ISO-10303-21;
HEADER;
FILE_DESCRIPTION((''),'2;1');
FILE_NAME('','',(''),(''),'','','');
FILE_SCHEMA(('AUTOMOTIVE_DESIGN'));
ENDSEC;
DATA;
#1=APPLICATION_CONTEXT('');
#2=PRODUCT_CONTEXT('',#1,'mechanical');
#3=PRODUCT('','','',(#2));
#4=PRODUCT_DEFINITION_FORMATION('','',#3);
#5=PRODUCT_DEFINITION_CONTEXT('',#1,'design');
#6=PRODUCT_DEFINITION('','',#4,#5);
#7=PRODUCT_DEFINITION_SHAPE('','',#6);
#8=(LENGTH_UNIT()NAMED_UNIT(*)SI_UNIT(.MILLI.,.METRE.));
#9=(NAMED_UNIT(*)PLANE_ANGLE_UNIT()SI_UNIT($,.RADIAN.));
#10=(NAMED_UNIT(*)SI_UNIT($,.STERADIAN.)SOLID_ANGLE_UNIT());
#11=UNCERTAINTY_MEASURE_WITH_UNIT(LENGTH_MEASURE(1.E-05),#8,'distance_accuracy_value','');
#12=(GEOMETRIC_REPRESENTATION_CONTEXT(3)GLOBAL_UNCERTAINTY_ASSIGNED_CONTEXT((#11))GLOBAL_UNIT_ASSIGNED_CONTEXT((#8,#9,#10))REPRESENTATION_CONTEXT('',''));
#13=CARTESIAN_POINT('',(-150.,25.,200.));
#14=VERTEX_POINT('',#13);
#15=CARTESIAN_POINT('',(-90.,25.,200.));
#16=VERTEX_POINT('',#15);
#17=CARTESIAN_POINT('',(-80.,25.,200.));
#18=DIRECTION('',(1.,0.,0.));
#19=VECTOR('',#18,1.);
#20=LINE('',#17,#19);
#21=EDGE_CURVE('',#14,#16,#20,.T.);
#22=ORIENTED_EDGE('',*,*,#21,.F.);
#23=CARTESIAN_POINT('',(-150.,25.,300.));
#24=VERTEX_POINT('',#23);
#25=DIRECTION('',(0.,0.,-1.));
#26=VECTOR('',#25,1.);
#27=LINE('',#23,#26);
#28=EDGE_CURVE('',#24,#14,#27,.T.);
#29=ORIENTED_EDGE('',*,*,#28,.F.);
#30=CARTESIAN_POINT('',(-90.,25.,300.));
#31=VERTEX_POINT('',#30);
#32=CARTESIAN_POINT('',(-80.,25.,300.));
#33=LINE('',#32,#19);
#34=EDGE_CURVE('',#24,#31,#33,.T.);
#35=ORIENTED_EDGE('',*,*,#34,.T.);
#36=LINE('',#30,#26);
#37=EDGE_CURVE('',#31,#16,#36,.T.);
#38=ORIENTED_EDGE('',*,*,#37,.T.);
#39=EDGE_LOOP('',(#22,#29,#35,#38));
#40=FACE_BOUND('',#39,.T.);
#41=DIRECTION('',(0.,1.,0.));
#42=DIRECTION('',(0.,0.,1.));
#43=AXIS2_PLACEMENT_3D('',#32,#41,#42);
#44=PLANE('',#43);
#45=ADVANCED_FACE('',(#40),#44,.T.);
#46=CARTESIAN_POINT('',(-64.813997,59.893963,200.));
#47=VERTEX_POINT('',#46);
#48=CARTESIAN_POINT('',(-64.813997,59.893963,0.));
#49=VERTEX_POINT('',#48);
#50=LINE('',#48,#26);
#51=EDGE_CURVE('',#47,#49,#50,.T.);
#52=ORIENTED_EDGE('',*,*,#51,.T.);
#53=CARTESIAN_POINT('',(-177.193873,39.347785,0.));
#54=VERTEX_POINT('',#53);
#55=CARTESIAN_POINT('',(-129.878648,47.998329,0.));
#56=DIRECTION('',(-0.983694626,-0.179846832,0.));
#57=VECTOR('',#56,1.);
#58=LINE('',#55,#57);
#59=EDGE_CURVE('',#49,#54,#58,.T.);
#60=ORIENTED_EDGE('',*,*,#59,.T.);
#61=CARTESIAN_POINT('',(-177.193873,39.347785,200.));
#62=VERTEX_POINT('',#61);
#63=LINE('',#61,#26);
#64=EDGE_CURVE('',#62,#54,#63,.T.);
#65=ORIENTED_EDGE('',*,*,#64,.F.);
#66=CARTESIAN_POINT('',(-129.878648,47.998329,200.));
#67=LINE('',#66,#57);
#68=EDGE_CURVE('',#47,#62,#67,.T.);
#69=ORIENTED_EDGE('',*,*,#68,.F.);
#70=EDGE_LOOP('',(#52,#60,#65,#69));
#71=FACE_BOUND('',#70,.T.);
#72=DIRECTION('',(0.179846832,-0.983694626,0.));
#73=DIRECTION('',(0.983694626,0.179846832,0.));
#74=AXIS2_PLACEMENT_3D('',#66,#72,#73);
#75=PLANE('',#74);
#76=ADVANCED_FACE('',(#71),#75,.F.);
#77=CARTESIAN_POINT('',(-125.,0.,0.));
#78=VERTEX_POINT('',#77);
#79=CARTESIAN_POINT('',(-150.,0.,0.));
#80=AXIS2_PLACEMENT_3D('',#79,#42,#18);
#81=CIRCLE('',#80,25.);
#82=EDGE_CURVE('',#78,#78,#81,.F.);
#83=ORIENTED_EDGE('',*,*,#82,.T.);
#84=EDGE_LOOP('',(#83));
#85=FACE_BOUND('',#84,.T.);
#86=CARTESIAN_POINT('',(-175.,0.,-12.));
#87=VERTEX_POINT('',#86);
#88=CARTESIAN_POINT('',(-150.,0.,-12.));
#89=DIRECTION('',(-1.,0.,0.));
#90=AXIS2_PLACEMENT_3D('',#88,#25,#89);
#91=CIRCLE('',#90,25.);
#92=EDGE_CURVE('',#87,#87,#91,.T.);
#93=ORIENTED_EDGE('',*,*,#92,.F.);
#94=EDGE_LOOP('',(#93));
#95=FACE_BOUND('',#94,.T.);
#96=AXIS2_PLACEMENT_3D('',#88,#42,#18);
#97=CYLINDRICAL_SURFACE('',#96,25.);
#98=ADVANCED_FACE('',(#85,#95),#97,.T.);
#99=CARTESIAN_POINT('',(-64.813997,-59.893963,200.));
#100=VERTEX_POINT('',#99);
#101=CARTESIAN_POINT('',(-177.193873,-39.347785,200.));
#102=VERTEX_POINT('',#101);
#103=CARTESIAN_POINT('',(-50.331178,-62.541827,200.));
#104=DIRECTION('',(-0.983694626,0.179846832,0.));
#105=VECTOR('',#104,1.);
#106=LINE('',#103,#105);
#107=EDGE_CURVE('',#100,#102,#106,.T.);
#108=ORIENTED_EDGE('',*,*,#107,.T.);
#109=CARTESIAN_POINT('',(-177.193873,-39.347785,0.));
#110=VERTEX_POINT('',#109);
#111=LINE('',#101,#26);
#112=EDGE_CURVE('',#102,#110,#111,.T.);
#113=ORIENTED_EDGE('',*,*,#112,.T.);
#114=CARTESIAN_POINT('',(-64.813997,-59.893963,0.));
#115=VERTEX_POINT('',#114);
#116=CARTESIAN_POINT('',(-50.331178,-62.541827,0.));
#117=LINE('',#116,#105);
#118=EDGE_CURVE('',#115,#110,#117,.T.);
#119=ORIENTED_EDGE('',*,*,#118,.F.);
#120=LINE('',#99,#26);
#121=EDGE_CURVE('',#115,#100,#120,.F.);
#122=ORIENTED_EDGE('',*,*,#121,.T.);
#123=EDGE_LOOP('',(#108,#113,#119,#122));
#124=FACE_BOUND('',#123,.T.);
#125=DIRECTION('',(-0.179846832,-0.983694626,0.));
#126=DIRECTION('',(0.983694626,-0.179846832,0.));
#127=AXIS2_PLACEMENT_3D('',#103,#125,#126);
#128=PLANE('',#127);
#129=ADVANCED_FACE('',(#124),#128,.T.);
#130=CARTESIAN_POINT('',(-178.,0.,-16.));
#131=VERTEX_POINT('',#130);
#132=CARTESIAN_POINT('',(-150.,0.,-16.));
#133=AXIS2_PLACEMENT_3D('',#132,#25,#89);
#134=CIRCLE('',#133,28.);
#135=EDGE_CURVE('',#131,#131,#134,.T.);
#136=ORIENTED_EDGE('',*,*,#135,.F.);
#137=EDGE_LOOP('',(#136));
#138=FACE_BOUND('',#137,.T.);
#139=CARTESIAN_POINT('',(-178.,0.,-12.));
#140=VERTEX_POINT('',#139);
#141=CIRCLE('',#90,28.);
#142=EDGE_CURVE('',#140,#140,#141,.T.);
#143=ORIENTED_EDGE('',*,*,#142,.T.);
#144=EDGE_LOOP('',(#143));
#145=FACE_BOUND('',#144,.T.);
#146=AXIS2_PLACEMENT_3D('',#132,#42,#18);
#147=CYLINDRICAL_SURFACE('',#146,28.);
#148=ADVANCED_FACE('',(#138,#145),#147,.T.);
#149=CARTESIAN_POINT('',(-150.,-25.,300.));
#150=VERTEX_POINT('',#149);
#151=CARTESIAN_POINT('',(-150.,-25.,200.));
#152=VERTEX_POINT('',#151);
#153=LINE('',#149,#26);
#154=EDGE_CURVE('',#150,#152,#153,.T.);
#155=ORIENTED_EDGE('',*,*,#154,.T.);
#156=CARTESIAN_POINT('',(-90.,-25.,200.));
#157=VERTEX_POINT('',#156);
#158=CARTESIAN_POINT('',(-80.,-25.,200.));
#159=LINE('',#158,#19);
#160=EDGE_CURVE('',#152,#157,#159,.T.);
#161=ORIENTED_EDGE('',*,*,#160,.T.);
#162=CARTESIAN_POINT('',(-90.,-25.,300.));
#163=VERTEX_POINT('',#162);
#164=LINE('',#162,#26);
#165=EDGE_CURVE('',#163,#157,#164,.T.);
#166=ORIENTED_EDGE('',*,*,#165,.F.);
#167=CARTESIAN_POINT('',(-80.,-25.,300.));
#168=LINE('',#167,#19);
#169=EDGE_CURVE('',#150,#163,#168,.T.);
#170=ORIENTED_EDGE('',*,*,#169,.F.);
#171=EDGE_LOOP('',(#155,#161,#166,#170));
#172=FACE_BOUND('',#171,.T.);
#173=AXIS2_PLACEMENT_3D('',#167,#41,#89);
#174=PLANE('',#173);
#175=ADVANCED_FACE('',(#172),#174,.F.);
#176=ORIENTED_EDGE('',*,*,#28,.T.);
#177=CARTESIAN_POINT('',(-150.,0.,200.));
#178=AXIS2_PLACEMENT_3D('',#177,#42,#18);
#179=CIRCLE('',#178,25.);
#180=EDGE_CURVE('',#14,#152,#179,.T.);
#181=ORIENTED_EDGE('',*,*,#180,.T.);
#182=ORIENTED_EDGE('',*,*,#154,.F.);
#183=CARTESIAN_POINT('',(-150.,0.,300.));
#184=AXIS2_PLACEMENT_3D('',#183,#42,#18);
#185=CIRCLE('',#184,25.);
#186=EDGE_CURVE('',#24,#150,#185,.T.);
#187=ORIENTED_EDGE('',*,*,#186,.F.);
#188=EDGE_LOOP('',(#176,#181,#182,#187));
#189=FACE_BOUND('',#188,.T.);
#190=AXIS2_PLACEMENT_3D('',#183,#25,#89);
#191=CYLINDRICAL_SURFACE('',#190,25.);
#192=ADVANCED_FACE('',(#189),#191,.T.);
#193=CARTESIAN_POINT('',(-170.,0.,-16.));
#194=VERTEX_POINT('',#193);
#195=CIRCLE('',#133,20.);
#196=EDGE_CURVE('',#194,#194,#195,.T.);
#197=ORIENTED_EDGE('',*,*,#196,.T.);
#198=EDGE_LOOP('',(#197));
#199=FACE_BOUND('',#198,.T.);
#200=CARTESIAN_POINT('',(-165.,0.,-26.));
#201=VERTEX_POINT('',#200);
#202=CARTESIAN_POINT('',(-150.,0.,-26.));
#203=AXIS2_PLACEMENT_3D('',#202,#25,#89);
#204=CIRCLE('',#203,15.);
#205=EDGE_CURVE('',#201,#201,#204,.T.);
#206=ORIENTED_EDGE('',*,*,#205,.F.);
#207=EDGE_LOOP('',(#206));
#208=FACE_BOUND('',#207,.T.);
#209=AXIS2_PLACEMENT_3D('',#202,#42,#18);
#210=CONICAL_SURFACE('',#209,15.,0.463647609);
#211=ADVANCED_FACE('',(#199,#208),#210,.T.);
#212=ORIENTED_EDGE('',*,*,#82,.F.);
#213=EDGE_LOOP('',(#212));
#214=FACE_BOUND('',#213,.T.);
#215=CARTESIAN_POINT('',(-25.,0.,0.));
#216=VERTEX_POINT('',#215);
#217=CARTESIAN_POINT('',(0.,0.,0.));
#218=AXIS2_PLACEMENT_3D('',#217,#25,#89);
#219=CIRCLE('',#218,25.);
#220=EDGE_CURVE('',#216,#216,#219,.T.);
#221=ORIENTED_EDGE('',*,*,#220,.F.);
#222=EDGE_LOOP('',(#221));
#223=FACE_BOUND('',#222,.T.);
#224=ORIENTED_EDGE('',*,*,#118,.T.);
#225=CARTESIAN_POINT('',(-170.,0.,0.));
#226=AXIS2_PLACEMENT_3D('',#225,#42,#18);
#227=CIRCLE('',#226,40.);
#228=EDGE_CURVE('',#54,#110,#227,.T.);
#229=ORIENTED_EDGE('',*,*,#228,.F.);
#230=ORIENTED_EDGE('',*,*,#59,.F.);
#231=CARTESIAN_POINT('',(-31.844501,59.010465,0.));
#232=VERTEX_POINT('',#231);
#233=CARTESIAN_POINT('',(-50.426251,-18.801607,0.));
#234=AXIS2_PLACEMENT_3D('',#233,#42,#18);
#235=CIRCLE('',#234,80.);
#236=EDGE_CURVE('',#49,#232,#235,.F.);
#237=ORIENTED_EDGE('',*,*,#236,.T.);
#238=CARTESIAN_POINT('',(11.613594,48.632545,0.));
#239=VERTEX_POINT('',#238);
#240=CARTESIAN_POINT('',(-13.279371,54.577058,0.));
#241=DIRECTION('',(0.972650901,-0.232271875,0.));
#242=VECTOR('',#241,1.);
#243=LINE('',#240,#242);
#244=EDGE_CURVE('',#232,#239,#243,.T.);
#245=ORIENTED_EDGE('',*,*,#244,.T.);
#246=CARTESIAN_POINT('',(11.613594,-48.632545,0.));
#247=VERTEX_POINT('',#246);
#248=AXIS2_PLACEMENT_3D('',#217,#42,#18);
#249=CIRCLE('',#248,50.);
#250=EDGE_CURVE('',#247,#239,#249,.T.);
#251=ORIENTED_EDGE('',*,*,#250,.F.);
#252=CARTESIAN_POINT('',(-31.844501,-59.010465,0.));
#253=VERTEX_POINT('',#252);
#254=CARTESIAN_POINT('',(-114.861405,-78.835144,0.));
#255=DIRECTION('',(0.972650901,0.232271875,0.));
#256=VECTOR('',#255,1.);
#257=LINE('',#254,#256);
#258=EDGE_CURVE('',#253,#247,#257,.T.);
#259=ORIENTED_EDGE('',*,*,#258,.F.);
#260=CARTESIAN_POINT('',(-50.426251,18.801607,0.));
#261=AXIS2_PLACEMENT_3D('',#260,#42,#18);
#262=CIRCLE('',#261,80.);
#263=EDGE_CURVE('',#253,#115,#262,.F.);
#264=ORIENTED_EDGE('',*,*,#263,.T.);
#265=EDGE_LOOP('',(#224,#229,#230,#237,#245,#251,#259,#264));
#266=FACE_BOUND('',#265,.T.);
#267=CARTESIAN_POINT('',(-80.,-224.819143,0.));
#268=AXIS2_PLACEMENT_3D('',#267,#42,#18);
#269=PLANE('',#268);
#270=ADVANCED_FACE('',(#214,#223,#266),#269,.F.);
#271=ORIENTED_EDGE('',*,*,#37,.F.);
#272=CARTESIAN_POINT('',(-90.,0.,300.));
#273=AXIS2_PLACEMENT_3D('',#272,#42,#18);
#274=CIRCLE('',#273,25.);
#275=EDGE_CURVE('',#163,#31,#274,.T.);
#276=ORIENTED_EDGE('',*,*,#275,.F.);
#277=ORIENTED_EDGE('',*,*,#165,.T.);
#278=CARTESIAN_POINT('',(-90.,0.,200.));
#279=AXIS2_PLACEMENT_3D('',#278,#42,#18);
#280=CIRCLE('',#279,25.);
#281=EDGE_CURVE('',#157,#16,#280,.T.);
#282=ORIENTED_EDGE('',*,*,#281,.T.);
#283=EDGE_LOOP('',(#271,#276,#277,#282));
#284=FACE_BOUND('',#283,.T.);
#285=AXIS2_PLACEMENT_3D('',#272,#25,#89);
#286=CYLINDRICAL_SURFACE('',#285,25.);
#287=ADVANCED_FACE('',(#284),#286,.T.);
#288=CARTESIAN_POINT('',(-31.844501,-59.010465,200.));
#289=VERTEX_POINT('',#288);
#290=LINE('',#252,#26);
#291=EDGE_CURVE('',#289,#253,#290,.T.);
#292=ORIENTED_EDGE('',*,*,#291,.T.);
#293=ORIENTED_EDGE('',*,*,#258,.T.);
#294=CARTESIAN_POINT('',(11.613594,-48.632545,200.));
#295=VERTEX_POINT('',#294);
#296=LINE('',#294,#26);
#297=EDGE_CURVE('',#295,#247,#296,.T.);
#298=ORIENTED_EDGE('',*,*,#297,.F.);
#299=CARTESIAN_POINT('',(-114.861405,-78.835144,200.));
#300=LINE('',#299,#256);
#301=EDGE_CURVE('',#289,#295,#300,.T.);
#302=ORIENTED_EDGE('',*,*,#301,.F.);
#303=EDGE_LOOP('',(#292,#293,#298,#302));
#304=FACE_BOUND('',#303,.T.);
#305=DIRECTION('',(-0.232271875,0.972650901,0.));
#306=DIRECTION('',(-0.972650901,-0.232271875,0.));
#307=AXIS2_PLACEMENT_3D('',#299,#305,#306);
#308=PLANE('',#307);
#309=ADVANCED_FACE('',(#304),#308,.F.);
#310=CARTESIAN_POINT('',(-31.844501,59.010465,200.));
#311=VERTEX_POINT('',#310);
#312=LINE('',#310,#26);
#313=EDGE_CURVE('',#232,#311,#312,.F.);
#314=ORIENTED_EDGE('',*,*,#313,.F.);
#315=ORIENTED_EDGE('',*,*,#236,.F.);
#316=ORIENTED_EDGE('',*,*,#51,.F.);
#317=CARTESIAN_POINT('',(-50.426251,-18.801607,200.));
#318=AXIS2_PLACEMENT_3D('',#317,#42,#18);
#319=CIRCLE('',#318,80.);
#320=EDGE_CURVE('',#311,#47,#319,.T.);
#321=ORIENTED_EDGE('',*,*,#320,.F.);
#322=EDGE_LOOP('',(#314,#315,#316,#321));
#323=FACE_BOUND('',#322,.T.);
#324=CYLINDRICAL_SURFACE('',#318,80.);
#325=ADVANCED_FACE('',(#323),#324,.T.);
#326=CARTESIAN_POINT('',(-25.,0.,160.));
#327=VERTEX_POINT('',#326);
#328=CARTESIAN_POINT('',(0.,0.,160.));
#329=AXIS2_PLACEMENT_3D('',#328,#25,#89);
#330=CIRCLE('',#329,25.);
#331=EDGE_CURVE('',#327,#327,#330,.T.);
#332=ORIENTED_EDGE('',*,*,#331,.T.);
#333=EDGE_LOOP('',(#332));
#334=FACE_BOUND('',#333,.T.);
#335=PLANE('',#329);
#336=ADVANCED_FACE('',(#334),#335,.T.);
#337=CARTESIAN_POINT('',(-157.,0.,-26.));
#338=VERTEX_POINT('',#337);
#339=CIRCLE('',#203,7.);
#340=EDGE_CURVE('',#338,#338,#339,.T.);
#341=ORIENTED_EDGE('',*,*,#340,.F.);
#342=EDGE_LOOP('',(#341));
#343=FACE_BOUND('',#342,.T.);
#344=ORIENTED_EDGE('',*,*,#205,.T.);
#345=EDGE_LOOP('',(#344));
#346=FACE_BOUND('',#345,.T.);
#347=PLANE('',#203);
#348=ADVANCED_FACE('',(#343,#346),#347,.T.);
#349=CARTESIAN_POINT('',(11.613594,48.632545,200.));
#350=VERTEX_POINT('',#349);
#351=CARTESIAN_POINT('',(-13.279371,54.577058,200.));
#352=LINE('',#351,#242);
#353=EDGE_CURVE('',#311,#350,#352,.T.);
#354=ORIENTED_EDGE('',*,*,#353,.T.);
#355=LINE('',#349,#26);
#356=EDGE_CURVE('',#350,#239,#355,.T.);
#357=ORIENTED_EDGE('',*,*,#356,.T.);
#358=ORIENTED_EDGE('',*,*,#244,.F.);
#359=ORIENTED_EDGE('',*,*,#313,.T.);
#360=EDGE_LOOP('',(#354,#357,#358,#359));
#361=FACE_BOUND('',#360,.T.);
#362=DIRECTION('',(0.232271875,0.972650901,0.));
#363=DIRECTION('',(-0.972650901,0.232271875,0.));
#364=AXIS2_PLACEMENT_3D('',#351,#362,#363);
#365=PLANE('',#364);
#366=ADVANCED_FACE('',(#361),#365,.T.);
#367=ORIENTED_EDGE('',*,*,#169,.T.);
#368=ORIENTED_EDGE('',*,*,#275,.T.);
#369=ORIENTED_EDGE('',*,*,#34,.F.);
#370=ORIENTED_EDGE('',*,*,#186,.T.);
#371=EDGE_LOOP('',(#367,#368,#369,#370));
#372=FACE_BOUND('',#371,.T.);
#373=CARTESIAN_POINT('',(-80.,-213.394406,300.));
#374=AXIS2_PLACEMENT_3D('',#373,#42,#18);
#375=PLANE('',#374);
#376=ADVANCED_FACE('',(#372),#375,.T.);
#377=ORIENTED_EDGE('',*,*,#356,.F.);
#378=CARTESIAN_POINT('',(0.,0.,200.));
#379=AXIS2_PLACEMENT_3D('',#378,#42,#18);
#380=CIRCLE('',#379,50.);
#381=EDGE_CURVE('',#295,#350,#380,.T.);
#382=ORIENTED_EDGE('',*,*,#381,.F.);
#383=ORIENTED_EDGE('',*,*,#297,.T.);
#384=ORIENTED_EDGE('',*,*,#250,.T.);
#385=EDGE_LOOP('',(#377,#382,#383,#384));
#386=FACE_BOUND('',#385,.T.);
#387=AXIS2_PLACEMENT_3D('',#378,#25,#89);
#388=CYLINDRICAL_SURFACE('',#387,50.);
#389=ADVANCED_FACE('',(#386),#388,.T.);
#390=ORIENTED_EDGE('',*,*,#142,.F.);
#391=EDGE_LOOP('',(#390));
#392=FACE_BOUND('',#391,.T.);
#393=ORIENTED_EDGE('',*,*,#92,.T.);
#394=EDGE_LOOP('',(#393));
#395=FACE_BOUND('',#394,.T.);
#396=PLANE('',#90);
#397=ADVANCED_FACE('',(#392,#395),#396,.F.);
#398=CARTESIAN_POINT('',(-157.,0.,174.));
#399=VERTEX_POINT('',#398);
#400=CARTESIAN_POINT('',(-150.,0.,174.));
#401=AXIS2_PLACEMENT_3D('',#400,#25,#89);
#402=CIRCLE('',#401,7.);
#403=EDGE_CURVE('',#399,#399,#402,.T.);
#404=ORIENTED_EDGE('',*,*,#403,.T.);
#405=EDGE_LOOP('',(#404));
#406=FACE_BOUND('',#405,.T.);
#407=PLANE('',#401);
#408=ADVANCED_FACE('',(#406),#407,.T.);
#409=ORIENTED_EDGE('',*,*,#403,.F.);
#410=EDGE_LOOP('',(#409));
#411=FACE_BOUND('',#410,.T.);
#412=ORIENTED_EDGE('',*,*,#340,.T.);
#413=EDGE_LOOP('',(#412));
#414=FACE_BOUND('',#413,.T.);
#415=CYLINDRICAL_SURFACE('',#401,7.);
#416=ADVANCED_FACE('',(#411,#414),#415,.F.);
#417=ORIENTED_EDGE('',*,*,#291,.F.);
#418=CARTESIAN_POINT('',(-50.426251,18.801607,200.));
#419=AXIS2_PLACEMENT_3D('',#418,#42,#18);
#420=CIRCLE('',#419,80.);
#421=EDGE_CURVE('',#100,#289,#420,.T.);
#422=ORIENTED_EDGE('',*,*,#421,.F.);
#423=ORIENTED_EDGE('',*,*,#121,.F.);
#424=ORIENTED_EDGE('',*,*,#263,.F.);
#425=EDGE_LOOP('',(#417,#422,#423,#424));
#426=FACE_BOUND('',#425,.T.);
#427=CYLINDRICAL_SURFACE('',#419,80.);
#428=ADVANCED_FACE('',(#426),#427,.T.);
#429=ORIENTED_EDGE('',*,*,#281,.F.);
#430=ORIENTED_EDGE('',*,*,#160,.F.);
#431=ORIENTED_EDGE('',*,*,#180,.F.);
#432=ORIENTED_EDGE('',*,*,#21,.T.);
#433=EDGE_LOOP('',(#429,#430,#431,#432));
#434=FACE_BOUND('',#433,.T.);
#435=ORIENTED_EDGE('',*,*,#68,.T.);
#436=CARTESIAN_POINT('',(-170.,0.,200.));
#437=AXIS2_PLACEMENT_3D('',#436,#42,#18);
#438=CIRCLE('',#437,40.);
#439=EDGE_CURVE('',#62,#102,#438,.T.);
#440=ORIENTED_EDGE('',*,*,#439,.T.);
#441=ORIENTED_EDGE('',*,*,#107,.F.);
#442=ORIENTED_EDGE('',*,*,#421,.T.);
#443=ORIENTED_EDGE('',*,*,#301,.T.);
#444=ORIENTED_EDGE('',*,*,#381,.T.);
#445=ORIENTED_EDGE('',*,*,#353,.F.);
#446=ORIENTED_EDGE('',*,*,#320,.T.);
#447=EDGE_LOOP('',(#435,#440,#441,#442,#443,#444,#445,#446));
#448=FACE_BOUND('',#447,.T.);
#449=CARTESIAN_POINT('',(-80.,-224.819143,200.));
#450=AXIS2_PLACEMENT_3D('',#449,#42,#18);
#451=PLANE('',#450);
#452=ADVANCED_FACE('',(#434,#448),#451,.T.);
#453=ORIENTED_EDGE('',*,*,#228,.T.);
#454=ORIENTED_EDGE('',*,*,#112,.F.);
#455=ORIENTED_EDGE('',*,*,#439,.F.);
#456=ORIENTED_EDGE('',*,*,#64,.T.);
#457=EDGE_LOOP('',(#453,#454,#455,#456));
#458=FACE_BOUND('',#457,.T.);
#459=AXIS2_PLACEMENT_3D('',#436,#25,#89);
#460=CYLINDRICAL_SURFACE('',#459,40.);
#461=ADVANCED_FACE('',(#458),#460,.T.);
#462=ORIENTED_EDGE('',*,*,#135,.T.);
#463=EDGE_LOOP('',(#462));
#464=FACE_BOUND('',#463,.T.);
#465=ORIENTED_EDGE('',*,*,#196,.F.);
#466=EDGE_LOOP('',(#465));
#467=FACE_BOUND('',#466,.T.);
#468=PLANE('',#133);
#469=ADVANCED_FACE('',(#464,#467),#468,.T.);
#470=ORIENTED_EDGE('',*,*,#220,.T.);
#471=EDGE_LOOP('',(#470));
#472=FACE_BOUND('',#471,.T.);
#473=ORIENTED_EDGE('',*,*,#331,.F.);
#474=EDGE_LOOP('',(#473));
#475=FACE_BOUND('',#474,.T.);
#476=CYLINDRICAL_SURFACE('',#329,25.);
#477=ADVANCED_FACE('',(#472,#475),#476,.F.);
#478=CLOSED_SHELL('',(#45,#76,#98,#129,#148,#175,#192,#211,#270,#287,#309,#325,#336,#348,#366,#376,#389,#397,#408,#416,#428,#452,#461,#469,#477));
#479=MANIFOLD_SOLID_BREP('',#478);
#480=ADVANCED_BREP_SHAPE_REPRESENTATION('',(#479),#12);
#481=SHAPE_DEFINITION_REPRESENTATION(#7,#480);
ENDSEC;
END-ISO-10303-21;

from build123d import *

# Parameters (mm, degrees)
EXTRUDE_1_DEPTH     = 200
FILLET_1_R          = 80
EXTRUDE_2_DEPTH     = 100
SKETCH_3_R          = 25
CUT_EXTRUDE_1_DEPTH = 160
EXTRUDE_START       = 12
SKETCH_4_R          = 25
EXTRUDE_3_DEPTH     = 12
SKETCH_5_R          = 28
EXTRUDE_4_DEPTH     = 4
SKETCH_6_R          = 20
EXTRUDE_5_DEPTH     = 10
CHAMFER_1_SIZE2     = 5
CHAMFER_1_SIZE      = 10
SKETCH_7_R          = 7
CUT_EXTRUDE_2_DEPTH = 200


with BuildPart() as part:
    # 草图1 → 凸台-拉伸1 (new body)
    with BuildSketch(Plane.XY):
        with BuildLine():
            ThreePointArc((11.613593767, -48.632545068), (50, 0), (11.613593767, 48.632545068))
            Line((11.613593767, 48.632545068), (-48.23619118, 62.924848473))
            Line((-48.23619118, 62.924848473), (-177.193873283, 39.347785035))
            ThreePointArc((-177.193873283, 39.347785035), (-210, 0), (-177.193873283, -39.347785035))
            Line((-177.193873283, -39.347785035), (-48.23619118, -62.924848473))
            Line((-48.23619118, -62.924848473), (11.613593767, -48.632545068))
        make_face()
    extrude(amount=EXTRUDE_1_DEPTH)

    # 圆角1
    fillet_1_edges = [part.edges().sort_by_distance(p)[0] for p in [
        (-48.23619118, -62.924848473, 100),
        (-48.23619118, 62.924848473, 100),
    ]]
    fillet(fillet_1_edges, radius=FILLET_1_R)

    # 草图2 → 凸台-拉伸2 (add)
    with BuildSketch(Plane.XY.offset(200)):
        with BuildLine():
            ThreePointArc((-125, 0), (-132.32233047, 17.67766953), (-150, 25))
            Line((-150, 25), (-150, -25))
            ThreePointArc((-150, -25), (-132.32233047, -17.67766953), (-125, 0))
        make_face()
        with BuildLine():
            Line((-150, -25), (-150, 25))
            ThreePointArc((-150, 25), (-175, 0), (-150, -25))
        make_face()
        with BuildLine():
            Line((-90, 25), (-150, 25))
            ThreePointArc((-150, 25), (-132.32233047, 17.67766953), (-125, 0))
            ThreePointArc((-125, 0), (-132.32233047, -17.67766953), (-150, -25))
            Line((-150, -25), (-90, -25))
            ThreePointArc((-90, -25), (-115, 0), (-90, 25))
        make_face()
        with BuildLine():
            ThreePointArc((-65, 0), (-72.32233047, 17.67766953), (-90, 25))
            Line((-90, 25), (-90, -25))
            ThreePointArc((-90, -25), (-72.32233047, -17.67766953), (-65, 0))
        make_face()
        with BuildLine():
            Line((-90, -25), (-90, 25))
            ThreePointArc((-90, 25), (-115, 0), (-90, -25))
        make_face()
    extrude(amount=EXTRUDE_2_DEPTH)

    # 草图3 → 切除-拉伸1 (cut)
    with BuildSketch(Plane(origin=(0, 0, 0), x_dir=(-1, 0, 0), z_dir=(0, 0, -1))):
        Circle(SKETCH_3_R)
    extrude(amount=-CUT_EXTRUDE_1_DEPTH, mode=Mode.SUBTRACT)

    # 草图4 → 凸台-拉伸3 (add)
    with BuildSketch(Plane(origin=(0, 0, 0), x_dir=(-1, 0, 0), z_dir=(0, 0, -1)).offset(EXTRUDE_START)):
        with Locations(Location((150, 0, 0), (0, 0, 180))):
            Circle(SKETCH_4_R)
    extrude(amount=-EXTRUDE_3_DEPTH)

    # 草图5 → 凸台-拉伸4 (add)
    with BuildSketch(Plane(origin=(0, 0, -12), x_dir=(-1, 0, 0), z_dir=(0, 0, -1))):
        with Locations((150, 0)):
            Circle(SKETCH_5_R)
    extrude(amount=EXTRUDE_4_DEPTH)

    # 草图6 → 凸台-拉伸5 (add)
    with BuildSketch(Plane(origin=(0, 0, -16), x_dir=(-1, 0, 0), z_dir=(0, 0, -1))):
        with Locations((150, 0)):
            Circle(SKETCH_6_R)
    extrude(amount=EXTRUDE_5_DEPTH)

    # 倒角1
    chamfer_1_edges = [part.edges().sort_by_distance(p)[0] for p in [
        (-130, 0, -26),
    ]]
    chamfer_1_side = [part.faces().sort_by_distance(p)[0] for p in [
        (-130, 0, -25.9),
    ]]
    chamfer(chamfer_1_edges, length=CHAMFER_1_SIZE - 0.0001, length2=CHAMFER_1_SIZE2 - 0.0001, reference=chamfer_1_side[0])  # a hair under: the kernel refuses the full size

    # 草图7 → 切除-拉伸2 (cut)
    with BuildSketch(Plane(origin=(0, 0, -26), x_dir=(-1, 0, 0), z_dir=(0, 0, -1))):
        with Locations((150, 0)):
            Circle(SKETCH_7_R)
    extrude(amount=-CUT_EXTRUDE_2_DEPTH, mode=Mode.SUBTRACT)


solid = part.part
